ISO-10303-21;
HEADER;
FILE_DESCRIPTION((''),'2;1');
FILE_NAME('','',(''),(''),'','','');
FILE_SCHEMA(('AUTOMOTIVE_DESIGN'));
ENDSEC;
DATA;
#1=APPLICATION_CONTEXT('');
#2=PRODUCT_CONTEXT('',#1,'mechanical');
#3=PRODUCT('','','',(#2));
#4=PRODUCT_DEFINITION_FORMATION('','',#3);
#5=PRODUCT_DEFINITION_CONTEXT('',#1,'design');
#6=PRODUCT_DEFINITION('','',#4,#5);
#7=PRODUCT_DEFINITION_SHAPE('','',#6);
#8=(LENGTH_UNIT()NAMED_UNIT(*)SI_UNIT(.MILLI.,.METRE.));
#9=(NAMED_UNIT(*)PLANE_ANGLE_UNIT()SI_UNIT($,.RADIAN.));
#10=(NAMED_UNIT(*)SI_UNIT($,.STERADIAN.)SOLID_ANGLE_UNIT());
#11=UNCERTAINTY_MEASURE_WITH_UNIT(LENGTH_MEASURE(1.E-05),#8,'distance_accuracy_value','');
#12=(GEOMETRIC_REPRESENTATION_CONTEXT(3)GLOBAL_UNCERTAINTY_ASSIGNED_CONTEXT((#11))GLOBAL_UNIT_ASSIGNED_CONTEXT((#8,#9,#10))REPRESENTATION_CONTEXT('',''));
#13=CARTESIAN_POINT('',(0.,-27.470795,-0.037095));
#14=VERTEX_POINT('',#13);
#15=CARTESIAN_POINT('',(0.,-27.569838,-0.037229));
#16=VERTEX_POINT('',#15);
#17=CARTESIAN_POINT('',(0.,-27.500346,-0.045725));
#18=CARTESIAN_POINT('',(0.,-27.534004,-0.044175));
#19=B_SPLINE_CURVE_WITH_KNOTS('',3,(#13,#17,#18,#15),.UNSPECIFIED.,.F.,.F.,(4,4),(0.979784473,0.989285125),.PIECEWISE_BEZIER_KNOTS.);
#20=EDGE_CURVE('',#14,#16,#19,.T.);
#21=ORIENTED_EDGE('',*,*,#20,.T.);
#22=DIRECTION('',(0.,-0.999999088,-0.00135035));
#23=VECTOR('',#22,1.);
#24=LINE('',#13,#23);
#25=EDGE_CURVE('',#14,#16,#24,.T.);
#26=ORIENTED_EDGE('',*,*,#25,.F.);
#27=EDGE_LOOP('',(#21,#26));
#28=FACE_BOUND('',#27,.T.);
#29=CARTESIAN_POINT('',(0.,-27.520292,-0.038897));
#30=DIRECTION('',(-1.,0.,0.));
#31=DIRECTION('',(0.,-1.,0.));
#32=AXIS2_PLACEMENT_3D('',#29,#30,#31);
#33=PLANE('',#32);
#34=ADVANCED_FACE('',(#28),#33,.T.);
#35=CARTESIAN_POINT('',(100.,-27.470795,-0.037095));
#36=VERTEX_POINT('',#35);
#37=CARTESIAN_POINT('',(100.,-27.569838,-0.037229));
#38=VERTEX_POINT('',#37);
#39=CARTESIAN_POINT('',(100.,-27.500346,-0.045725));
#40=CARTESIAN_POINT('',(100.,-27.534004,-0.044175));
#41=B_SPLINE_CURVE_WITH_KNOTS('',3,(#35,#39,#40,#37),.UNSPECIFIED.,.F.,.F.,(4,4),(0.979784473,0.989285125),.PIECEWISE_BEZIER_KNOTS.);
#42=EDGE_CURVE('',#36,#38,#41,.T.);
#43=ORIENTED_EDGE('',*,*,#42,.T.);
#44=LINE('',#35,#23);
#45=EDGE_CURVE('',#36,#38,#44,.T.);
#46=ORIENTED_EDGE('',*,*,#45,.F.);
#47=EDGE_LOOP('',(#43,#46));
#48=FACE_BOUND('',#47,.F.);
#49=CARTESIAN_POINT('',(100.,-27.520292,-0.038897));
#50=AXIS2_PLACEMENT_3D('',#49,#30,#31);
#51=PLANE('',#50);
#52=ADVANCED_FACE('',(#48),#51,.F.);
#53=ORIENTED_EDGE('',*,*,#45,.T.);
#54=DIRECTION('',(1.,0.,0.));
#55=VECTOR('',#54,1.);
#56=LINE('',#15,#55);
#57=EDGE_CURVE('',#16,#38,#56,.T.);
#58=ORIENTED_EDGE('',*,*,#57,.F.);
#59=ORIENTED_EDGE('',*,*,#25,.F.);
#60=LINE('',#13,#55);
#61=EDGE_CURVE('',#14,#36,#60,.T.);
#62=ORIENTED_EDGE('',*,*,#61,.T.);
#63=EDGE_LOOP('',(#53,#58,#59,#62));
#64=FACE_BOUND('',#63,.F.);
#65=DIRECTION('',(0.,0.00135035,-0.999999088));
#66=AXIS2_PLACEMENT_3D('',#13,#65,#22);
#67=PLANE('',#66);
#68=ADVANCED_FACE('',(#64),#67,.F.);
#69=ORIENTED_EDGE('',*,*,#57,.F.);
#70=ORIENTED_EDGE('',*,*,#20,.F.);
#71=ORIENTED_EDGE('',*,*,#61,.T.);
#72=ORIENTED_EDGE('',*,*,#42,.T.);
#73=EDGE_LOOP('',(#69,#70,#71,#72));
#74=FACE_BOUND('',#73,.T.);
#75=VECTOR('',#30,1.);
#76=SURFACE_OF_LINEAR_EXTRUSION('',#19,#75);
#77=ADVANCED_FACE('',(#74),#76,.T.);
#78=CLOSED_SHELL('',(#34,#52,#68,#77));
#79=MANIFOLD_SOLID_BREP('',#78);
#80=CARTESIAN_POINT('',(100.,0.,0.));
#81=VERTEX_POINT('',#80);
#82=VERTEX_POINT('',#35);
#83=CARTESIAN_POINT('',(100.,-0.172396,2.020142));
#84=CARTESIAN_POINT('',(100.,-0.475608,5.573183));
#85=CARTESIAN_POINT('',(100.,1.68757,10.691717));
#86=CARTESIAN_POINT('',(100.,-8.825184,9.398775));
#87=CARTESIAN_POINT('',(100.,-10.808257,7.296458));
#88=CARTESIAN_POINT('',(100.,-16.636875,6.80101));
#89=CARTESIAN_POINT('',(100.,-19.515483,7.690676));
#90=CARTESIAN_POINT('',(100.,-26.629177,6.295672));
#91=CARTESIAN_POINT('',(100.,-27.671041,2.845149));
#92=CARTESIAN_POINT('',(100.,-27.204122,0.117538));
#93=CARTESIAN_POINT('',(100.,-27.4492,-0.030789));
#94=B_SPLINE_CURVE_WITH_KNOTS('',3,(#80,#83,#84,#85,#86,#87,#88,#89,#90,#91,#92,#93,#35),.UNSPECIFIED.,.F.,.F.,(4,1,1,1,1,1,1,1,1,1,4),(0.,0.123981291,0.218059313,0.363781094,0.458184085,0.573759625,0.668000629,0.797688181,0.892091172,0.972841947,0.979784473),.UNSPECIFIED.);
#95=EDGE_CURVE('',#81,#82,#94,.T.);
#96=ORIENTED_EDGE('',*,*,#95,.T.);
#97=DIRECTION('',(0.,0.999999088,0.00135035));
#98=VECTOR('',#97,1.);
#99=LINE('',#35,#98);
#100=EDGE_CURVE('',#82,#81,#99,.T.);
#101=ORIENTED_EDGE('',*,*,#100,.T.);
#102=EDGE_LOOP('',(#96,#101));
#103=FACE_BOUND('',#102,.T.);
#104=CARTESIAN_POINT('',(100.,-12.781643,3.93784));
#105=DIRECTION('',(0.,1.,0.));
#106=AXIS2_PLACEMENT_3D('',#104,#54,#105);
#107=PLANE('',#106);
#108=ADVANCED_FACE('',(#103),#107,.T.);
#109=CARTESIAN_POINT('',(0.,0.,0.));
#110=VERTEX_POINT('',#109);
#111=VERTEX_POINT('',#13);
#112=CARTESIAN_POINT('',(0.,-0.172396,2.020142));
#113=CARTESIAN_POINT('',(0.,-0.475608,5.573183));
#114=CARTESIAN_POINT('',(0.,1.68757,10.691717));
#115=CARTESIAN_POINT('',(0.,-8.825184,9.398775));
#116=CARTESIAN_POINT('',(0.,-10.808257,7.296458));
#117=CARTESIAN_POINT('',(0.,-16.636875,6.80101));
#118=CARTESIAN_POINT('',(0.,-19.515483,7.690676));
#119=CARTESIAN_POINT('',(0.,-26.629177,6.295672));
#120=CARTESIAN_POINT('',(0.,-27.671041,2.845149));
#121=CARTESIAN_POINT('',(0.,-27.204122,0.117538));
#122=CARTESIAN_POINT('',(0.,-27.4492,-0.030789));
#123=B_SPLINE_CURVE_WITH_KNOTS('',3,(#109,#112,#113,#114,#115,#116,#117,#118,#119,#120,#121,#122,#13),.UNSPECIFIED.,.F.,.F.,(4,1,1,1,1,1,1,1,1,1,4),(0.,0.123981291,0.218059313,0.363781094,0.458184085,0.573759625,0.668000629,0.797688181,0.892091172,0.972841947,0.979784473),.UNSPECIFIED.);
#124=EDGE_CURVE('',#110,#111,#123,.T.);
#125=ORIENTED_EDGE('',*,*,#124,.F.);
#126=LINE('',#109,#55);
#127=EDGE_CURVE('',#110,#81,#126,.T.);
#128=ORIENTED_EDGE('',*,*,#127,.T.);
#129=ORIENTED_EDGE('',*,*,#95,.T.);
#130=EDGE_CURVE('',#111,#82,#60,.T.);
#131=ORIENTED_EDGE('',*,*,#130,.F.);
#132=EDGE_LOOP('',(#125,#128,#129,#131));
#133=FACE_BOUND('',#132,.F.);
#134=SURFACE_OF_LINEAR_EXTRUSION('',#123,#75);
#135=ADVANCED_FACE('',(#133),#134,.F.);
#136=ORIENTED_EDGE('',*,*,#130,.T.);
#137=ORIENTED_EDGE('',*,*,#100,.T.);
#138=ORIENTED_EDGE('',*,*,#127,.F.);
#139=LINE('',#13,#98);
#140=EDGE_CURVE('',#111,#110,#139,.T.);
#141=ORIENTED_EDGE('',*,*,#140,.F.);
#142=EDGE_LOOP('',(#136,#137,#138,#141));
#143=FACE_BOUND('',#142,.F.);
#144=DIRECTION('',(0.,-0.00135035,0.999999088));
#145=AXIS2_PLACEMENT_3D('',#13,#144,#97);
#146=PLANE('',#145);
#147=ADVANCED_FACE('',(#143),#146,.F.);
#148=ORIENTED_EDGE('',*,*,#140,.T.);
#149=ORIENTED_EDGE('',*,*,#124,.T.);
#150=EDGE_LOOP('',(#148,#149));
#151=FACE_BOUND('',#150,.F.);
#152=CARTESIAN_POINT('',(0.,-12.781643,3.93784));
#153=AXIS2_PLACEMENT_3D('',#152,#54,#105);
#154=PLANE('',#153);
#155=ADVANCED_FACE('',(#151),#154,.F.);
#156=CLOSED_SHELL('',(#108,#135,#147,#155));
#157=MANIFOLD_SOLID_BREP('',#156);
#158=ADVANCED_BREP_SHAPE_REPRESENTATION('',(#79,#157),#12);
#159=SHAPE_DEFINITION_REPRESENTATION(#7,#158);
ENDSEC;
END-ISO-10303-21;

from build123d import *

# Parameters (mm, degrees)
F1_DEPTH = 100


with BuildPart() as f1:
    # F0 (on Right) → F1 (new body)
    with BuildSketch(Plane.YZ):
        with BuildLine():
            Line((-27.4707945164, -0.0370952116), (0, 0))
            add(Edge.make_bspline(
                [(0, 0), (-0.1723960733, 2.0201415213), (-0.4756077019, 5.5731830097), (1.6875698156, 10.6917174648), (-8.8251839298, 9.3987754232), (-10.8082568794, 7.2964584479), (-16.6368751127, 6.801009759), (-19.5154827985, 7.6906763858), (-26.6291772402, 6.295671632), (-27.6710413001, 2.8451492855), (-27.2041217809, 0.1175378731), (-27.4491996919, -0.0307887023), (-27.4707945164, -0.0370952116)],
                knots=[0, 0, 0, 0, 0.1239812913, 0.2180593128, 0.3637810943, 0.4581840847, 0.573759625, 0.6680006292, 0.7976881814, 0.8920911723, 0.9728419475, 0.9797844728, 0.9797844728, 0.9797844728, 0.9797844728], degree=3))
        make_face()
    extrude(amount=F1_DEPTH)


with BuildPart() as f1b:
    # F0 (on Right) → F1, piece 2 (new body)
    with BuildSketch(Plane.YZ):
        with BuildLine():
            add(Edge.make_bspline(
                [(-27.4707945164, -0.0370952116), (-27.5003464308, -0.0457254936), (-27.5340041528, -0.0441752313), (-27.5698380839, -0.0372289552)],
                knots=[0.9797844728, 0.9797844728, 0.9797844728, 0.9797844728, 0.9892851247, 0.9892851247, 0.9892851247, 0.9892851247], degree=3))
            Line((-27.4707945164, -0.0370952116), (-27.5698380839, -0.0372289552))
        make_face()
    extrude(amount=F1_DEPTH)


solid = Compound([f1.part, f1b.part])
